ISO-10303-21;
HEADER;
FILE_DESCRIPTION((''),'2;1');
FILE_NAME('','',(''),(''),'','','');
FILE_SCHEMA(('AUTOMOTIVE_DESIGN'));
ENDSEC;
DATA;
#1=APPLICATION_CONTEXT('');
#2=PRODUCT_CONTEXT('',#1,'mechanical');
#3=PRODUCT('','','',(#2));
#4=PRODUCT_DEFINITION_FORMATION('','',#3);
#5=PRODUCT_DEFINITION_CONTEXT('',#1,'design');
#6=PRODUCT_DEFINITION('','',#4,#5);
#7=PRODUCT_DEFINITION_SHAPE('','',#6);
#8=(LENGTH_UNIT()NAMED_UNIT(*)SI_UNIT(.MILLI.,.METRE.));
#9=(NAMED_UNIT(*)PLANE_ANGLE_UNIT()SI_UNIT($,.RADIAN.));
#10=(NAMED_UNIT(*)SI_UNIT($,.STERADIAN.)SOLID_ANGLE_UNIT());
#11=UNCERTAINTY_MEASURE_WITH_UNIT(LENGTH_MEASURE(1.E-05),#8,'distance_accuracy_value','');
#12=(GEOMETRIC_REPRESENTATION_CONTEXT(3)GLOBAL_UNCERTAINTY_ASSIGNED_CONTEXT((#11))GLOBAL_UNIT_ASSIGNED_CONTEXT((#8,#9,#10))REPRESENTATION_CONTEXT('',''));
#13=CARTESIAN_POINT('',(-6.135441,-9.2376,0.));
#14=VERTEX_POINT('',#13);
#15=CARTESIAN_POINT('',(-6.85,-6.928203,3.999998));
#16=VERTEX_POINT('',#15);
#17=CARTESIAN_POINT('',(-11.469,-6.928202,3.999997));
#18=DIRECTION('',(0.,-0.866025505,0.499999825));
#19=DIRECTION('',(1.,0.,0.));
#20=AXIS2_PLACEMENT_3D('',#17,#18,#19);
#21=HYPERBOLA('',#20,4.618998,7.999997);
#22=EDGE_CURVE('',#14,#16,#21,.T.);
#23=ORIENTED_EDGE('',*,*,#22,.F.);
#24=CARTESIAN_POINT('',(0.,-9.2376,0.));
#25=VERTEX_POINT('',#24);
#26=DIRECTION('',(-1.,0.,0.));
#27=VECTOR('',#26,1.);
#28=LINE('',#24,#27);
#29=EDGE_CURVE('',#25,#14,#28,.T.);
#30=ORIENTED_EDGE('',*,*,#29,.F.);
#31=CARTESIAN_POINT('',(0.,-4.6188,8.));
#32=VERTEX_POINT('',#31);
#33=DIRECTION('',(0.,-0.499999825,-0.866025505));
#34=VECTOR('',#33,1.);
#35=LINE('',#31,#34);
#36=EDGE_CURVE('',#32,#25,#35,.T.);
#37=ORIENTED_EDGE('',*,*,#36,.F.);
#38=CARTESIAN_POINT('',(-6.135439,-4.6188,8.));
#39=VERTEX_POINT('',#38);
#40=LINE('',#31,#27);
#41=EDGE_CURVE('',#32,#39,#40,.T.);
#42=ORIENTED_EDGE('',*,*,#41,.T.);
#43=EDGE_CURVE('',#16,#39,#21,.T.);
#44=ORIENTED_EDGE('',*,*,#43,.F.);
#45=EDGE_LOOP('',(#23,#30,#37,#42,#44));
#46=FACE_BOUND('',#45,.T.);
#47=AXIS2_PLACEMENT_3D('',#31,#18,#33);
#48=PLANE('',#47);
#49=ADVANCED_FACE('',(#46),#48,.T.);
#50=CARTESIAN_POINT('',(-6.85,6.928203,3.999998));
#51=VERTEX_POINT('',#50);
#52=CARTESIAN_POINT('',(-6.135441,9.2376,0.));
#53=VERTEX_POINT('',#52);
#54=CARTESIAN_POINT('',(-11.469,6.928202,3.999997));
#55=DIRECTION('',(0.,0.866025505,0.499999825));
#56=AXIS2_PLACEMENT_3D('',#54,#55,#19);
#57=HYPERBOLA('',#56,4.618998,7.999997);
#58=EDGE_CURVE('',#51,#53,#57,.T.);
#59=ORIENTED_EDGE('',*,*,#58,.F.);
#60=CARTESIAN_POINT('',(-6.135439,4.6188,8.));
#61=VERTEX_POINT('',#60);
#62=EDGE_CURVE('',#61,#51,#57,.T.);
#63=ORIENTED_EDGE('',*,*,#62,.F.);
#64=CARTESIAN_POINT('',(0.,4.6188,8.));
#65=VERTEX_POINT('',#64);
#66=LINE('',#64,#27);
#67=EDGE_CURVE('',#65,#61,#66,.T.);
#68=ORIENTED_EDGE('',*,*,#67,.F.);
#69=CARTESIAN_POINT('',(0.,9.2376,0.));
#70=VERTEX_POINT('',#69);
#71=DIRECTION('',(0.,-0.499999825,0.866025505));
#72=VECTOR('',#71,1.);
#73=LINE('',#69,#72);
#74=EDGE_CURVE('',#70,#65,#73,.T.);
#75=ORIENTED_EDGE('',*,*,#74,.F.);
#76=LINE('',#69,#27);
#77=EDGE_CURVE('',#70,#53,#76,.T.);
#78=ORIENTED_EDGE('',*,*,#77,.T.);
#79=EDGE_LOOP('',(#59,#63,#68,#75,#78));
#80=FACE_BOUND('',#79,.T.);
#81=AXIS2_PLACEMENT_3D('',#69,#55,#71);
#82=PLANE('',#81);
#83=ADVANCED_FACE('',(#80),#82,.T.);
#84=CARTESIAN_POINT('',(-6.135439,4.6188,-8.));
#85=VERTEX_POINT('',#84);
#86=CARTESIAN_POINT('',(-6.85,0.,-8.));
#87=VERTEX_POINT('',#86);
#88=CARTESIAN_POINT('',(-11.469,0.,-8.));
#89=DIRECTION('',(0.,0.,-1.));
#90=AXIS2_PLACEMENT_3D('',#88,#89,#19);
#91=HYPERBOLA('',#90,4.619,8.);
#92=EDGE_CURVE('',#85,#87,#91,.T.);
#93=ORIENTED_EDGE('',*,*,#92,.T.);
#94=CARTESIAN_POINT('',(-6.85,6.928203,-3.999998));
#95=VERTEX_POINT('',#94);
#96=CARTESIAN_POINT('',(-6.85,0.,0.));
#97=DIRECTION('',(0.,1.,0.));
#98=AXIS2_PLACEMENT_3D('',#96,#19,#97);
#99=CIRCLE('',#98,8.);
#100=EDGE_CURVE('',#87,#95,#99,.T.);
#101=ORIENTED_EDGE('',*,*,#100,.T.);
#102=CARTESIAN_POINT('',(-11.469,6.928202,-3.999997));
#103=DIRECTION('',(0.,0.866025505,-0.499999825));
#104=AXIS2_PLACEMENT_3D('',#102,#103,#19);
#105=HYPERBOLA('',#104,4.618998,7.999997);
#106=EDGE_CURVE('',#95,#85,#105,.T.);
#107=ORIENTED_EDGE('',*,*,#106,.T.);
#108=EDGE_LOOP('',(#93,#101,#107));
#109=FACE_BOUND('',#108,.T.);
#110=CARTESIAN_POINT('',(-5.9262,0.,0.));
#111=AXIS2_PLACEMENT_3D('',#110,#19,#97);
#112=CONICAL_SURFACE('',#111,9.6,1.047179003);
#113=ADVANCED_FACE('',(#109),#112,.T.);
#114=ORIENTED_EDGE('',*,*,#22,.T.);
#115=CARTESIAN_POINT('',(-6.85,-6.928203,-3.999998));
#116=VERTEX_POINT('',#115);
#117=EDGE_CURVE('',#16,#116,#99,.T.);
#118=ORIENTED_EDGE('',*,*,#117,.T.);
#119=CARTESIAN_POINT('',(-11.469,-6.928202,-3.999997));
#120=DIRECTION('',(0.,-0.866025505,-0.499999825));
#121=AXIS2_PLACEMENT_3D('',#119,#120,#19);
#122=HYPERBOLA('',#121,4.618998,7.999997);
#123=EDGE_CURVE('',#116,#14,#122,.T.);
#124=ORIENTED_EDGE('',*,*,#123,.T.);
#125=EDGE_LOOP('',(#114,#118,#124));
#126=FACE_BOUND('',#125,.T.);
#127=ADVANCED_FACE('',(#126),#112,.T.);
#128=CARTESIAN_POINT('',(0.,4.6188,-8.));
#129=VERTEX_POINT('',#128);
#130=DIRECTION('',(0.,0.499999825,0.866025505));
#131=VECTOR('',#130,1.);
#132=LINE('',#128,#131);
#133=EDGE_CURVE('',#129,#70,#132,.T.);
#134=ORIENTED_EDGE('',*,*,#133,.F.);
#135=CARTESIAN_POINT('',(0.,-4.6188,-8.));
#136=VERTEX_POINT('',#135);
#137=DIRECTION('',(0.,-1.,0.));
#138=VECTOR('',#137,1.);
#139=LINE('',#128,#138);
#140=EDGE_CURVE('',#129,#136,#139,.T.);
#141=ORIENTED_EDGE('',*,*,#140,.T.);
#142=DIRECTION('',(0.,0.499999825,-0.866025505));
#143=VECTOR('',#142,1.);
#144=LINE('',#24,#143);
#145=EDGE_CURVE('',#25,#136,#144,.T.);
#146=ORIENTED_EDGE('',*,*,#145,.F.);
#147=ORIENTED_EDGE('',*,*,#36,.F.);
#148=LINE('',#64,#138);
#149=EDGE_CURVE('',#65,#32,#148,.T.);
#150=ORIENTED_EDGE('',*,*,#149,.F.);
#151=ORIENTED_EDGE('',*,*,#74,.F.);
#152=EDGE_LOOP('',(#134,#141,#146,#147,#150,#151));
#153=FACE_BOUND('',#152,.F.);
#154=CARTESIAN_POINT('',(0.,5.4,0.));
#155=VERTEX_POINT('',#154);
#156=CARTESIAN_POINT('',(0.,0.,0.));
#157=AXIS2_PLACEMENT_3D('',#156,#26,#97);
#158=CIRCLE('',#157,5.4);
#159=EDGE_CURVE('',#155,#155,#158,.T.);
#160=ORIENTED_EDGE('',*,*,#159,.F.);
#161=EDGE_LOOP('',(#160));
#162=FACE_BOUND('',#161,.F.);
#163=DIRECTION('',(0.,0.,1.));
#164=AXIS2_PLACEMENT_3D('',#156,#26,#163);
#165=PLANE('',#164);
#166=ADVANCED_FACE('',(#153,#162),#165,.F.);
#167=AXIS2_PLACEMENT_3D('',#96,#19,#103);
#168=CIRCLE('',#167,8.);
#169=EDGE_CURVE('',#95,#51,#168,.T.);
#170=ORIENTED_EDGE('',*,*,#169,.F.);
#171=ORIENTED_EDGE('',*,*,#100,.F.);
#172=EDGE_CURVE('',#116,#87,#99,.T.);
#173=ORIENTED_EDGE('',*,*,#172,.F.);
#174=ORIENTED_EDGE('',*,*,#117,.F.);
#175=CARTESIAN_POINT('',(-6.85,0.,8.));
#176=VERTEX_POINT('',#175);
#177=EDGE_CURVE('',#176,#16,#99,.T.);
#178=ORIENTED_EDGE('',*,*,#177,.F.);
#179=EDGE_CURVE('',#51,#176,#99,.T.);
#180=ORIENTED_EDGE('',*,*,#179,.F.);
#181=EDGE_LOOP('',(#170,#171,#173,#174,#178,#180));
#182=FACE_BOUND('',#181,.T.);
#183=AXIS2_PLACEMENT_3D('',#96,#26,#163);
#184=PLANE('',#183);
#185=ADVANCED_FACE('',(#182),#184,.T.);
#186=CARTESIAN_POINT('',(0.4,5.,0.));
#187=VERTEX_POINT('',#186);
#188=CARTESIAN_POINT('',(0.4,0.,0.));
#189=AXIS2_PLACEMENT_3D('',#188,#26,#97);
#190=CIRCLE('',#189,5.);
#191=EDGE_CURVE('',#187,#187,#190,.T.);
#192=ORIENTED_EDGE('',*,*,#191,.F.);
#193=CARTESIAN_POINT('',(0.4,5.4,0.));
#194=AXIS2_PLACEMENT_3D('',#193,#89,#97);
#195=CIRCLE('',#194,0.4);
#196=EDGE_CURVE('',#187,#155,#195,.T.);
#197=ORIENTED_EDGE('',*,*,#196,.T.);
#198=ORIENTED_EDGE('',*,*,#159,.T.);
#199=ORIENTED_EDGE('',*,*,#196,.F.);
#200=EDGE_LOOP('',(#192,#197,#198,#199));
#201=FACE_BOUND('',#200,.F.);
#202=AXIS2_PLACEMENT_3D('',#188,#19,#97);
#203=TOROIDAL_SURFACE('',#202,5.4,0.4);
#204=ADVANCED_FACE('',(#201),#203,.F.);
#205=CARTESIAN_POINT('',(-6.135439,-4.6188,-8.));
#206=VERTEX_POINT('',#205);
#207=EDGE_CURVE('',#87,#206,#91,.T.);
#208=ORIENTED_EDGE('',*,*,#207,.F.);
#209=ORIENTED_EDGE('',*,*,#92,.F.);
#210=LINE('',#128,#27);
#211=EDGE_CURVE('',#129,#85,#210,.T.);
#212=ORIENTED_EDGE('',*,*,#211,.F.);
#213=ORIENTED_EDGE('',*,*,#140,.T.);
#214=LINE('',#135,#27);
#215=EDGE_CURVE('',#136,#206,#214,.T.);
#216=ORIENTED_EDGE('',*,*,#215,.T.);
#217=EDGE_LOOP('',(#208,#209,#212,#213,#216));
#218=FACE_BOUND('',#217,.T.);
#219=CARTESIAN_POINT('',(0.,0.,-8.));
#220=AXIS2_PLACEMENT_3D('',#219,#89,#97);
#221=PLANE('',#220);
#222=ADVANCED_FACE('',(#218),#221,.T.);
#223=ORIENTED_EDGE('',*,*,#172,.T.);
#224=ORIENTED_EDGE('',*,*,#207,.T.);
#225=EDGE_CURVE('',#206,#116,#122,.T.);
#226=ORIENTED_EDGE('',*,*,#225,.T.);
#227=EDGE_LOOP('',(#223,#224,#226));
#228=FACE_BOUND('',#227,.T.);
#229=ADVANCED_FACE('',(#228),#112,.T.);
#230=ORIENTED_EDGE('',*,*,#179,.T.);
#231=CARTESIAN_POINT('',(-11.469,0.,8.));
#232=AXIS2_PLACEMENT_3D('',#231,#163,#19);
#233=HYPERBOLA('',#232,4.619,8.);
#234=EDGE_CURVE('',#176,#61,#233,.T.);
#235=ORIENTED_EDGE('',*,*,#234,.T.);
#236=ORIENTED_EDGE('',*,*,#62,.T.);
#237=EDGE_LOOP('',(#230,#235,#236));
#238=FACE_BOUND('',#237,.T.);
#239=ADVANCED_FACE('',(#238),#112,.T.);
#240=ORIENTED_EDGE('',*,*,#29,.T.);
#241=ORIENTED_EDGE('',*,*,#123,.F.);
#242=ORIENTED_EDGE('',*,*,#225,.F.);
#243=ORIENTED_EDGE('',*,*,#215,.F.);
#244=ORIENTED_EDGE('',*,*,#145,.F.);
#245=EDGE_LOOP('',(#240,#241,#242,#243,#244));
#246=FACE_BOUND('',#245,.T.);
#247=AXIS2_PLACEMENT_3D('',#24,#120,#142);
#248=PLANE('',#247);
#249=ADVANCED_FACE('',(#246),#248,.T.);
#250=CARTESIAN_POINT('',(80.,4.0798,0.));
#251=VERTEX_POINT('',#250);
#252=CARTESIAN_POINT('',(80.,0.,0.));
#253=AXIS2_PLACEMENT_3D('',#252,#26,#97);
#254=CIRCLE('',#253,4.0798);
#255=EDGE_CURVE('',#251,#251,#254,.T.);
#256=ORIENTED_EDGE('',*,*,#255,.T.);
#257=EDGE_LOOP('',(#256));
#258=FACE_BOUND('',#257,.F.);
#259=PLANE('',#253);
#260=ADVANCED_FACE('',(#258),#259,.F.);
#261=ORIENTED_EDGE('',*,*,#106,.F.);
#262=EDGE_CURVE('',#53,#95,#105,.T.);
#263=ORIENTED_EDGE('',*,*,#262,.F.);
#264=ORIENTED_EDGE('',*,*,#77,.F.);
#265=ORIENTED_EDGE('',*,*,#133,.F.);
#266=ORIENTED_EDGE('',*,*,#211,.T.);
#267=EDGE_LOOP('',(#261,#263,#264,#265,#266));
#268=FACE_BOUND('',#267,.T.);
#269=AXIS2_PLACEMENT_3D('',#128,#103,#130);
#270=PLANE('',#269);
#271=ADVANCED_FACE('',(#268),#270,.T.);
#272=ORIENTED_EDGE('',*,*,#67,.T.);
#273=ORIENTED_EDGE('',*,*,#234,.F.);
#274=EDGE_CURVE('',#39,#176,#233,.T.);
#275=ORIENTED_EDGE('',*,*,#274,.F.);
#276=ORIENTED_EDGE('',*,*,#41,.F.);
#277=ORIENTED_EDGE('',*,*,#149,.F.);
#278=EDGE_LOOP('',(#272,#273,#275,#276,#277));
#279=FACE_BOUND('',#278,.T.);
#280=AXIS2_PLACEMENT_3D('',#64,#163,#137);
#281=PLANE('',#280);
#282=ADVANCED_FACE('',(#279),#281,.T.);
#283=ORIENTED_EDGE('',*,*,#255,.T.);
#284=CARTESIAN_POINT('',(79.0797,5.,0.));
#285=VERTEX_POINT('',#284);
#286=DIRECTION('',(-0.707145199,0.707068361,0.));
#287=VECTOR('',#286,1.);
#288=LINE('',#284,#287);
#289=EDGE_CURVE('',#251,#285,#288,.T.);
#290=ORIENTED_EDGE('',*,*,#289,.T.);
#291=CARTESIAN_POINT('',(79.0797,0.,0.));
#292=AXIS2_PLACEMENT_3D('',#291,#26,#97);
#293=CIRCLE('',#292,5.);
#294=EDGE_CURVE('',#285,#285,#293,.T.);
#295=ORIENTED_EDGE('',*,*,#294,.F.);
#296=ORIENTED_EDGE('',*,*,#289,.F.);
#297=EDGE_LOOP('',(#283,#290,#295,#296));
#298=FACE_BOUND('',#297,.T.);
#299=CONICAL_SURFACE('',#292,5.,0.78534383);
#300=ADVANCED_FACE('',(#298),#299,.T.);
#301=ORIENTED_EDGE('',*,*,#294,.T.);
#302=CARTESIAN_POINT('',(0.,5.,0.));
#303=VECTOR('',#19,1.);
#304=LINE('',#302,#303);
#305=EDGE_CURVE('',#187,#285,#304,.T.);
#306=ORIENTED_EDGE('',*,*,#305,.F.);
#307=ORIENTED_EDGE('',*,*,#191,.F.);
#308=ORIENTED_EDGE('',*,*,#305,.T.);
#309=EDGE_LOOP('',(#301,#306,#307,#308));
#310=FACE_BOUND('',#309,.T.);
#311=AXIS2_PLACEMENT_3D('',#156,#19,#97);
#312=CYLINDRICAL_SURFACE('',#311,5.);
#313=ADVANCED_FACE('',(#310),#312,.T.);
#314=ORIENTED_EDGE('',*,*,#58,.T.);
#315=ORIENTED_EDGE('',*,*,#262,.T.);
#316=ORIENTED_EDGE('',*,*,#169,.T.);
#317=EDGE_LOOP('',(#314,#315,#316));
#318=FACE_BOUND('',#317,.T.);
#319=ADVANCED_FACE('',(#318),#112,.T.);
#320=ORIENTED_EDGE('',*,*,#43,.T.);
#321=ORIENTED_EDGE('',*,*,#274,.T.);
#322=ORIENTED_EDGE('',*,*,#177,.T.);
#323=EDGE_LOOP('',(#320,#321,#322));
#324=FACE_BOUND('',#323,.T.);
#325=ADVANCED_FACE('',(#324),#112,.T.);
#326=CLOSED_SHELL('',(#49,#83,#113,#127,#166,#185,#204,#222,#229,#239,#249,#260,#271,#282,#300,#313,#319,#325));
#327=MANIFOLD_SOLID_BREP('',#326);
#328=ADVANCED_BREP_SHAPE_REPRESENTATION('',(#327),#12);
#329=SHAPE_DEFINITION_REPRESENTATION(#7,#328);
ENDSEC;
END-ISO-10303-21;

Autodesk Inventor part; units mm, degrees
ref_plane "YZ Plane" through (0, 0, 0) normal (1, 0, 0) x (0, 1, 0)
ref_plane "XZ Plane" through (0, 0, 0) normal (0, 1, 0) x (-1, 0, 0)
sketch "Эскиз1" plane through (0, 0, 0) normal (0, 0, 1) x (1, 0, 0)
  line L0 (0, 5) -> (80, 5)
  line L1 (80, 5) -> (80, 0)
  line L2 (80, 0) -> (0, 0)
  line L3 (-16, 0) -> (96, 0) projected
  line L4 (0, -1) -> (0, 6) projected
  line L5 (0, 5) -> (0, 0)
  dimension "d2" = 10
  dimension "d59" = 80
revolve "Базовый элемент" add sketch "Эскиз1" angle 360 about axis through (80, 0, 0) along (-1, 0, 0)
sketch "Эскиз2" plane through (0, 0, 0) normal (-1, 0, 0) x (0, 0, 1)
  line L0 (0, 9.2376) -> (8, 4.6188)
  line L1 (8, 4.6188) -> (8, -4.6188)
  line L2 (8, -4.6188) -> (0, -9.2376)
  line L3 (0, -9.2376) -> (-8, -4.6188)
  line L4 (-8, -4.6188) -> (-8, 4.6188)
  line L5 (-8, 4.6188) -> (0, 9.2376)
  line L6 (-11.2, 0) -> (11.2, 0) projected
  line L7 (0, 12.9326) -> (0, -12.9326) projected
  point P0 (0, 0)
  point P1 (0, 0)
  dimension "d11" = 16
extrude "С головкой" add sketch "Эскиз2" along normal blind 6.85
sketch "Эскиз4" plane through (0, 0, 0) normal (0, 0, 1) x (1, 0, 0)
  line L0 (-5.9262, 9.6) -> (-6.85, 8)
  line L1 (-1.1, 0) -> (-0.234, 0)
  line L2 (-8.1732, 0) -> (1.0892, 0) projected
  line L3 (-6.85, 9.6) -> (-5.9262, 9.6)
  line L4 (-6.85, 8) -> (-6.85, 9.6)
  line L5 (0, 11.52) -> (0, -1.92) projected
  dimension "d65" = 16
  dimension "d67" = 30
  dimension "d68" = 19.2
  dimension "d69" = 6.85
revolve "Фаска1" cut sketch "Эскиз4" angle 360 about axis through (-1.1, 0, 0) along (1, 0, 0)
thread "Резьба" size "M10x1.5" class "6g" standard "ISO Metric profile" length 26
chamfer "Фаска2" distance 0.9202 distance2 0.9203 1 edges at (80, -5, 0) measured on face at (80, 0.2493, 1.2557)
fillet "Fillet" radius 0.4 1 edges at (0, -5, 0)
ref_plane "Work Plane1" through (1.525, 0, 0) normal (0, 0, 1) x (1, 0, 0)
equation "\"d2\" = GD"
equation "\"d59\" = NLG"
equation "\"d11\" = SW"
equation "\"d3\" = KOH"
equation "\"d71\" = RR1"
equation "\"d15\" = GEL"
equation "\"d6\" = -0.5 * SPD + 0.5 * GD"
equation "\"d65\" = SW"
equation "\"d67\" = ANG1"
equation "\"d68\" = 1.2 * SW"
equation "\"d69\" = KOH"
equation "\"NLG\" = 80"
equation "\"GD\" = NND"
equation "\"KOH\" = 6.85"
equation "\"GEL\" = 26"
equation "\"SW\" = 16"
equation "\"SW0\" = SW"
equation "\"SPD\" = NND - 1.2269 * PTC"
equation "\"SD\" = 0"
equation "\"ANG1\" = 30deg"
equation "\"GAL\" = 0.61345 * PTC"
equation "\"GUL\" = 0.61345 * PTC"
equation "\"RR\" = 0.1"
equation "\"RR1\" = 0.4"
equation "\"GD1\" = THREADDIA - 1.2269 * PTC"
equation "\"TOA\" = 30deg"
equation "\"PTC\" = 1.5"
equation "\"KOH1\" = 4.5"
equation "\"E0\" = 1.155 * SW"
equation "\"NND\" = 10"
equation "\"THREADDIA\" = 10"
properties part number "ANSI B18.2.3.5M - M10 x 1,5 x 80" material "Сталь, мягкая"
